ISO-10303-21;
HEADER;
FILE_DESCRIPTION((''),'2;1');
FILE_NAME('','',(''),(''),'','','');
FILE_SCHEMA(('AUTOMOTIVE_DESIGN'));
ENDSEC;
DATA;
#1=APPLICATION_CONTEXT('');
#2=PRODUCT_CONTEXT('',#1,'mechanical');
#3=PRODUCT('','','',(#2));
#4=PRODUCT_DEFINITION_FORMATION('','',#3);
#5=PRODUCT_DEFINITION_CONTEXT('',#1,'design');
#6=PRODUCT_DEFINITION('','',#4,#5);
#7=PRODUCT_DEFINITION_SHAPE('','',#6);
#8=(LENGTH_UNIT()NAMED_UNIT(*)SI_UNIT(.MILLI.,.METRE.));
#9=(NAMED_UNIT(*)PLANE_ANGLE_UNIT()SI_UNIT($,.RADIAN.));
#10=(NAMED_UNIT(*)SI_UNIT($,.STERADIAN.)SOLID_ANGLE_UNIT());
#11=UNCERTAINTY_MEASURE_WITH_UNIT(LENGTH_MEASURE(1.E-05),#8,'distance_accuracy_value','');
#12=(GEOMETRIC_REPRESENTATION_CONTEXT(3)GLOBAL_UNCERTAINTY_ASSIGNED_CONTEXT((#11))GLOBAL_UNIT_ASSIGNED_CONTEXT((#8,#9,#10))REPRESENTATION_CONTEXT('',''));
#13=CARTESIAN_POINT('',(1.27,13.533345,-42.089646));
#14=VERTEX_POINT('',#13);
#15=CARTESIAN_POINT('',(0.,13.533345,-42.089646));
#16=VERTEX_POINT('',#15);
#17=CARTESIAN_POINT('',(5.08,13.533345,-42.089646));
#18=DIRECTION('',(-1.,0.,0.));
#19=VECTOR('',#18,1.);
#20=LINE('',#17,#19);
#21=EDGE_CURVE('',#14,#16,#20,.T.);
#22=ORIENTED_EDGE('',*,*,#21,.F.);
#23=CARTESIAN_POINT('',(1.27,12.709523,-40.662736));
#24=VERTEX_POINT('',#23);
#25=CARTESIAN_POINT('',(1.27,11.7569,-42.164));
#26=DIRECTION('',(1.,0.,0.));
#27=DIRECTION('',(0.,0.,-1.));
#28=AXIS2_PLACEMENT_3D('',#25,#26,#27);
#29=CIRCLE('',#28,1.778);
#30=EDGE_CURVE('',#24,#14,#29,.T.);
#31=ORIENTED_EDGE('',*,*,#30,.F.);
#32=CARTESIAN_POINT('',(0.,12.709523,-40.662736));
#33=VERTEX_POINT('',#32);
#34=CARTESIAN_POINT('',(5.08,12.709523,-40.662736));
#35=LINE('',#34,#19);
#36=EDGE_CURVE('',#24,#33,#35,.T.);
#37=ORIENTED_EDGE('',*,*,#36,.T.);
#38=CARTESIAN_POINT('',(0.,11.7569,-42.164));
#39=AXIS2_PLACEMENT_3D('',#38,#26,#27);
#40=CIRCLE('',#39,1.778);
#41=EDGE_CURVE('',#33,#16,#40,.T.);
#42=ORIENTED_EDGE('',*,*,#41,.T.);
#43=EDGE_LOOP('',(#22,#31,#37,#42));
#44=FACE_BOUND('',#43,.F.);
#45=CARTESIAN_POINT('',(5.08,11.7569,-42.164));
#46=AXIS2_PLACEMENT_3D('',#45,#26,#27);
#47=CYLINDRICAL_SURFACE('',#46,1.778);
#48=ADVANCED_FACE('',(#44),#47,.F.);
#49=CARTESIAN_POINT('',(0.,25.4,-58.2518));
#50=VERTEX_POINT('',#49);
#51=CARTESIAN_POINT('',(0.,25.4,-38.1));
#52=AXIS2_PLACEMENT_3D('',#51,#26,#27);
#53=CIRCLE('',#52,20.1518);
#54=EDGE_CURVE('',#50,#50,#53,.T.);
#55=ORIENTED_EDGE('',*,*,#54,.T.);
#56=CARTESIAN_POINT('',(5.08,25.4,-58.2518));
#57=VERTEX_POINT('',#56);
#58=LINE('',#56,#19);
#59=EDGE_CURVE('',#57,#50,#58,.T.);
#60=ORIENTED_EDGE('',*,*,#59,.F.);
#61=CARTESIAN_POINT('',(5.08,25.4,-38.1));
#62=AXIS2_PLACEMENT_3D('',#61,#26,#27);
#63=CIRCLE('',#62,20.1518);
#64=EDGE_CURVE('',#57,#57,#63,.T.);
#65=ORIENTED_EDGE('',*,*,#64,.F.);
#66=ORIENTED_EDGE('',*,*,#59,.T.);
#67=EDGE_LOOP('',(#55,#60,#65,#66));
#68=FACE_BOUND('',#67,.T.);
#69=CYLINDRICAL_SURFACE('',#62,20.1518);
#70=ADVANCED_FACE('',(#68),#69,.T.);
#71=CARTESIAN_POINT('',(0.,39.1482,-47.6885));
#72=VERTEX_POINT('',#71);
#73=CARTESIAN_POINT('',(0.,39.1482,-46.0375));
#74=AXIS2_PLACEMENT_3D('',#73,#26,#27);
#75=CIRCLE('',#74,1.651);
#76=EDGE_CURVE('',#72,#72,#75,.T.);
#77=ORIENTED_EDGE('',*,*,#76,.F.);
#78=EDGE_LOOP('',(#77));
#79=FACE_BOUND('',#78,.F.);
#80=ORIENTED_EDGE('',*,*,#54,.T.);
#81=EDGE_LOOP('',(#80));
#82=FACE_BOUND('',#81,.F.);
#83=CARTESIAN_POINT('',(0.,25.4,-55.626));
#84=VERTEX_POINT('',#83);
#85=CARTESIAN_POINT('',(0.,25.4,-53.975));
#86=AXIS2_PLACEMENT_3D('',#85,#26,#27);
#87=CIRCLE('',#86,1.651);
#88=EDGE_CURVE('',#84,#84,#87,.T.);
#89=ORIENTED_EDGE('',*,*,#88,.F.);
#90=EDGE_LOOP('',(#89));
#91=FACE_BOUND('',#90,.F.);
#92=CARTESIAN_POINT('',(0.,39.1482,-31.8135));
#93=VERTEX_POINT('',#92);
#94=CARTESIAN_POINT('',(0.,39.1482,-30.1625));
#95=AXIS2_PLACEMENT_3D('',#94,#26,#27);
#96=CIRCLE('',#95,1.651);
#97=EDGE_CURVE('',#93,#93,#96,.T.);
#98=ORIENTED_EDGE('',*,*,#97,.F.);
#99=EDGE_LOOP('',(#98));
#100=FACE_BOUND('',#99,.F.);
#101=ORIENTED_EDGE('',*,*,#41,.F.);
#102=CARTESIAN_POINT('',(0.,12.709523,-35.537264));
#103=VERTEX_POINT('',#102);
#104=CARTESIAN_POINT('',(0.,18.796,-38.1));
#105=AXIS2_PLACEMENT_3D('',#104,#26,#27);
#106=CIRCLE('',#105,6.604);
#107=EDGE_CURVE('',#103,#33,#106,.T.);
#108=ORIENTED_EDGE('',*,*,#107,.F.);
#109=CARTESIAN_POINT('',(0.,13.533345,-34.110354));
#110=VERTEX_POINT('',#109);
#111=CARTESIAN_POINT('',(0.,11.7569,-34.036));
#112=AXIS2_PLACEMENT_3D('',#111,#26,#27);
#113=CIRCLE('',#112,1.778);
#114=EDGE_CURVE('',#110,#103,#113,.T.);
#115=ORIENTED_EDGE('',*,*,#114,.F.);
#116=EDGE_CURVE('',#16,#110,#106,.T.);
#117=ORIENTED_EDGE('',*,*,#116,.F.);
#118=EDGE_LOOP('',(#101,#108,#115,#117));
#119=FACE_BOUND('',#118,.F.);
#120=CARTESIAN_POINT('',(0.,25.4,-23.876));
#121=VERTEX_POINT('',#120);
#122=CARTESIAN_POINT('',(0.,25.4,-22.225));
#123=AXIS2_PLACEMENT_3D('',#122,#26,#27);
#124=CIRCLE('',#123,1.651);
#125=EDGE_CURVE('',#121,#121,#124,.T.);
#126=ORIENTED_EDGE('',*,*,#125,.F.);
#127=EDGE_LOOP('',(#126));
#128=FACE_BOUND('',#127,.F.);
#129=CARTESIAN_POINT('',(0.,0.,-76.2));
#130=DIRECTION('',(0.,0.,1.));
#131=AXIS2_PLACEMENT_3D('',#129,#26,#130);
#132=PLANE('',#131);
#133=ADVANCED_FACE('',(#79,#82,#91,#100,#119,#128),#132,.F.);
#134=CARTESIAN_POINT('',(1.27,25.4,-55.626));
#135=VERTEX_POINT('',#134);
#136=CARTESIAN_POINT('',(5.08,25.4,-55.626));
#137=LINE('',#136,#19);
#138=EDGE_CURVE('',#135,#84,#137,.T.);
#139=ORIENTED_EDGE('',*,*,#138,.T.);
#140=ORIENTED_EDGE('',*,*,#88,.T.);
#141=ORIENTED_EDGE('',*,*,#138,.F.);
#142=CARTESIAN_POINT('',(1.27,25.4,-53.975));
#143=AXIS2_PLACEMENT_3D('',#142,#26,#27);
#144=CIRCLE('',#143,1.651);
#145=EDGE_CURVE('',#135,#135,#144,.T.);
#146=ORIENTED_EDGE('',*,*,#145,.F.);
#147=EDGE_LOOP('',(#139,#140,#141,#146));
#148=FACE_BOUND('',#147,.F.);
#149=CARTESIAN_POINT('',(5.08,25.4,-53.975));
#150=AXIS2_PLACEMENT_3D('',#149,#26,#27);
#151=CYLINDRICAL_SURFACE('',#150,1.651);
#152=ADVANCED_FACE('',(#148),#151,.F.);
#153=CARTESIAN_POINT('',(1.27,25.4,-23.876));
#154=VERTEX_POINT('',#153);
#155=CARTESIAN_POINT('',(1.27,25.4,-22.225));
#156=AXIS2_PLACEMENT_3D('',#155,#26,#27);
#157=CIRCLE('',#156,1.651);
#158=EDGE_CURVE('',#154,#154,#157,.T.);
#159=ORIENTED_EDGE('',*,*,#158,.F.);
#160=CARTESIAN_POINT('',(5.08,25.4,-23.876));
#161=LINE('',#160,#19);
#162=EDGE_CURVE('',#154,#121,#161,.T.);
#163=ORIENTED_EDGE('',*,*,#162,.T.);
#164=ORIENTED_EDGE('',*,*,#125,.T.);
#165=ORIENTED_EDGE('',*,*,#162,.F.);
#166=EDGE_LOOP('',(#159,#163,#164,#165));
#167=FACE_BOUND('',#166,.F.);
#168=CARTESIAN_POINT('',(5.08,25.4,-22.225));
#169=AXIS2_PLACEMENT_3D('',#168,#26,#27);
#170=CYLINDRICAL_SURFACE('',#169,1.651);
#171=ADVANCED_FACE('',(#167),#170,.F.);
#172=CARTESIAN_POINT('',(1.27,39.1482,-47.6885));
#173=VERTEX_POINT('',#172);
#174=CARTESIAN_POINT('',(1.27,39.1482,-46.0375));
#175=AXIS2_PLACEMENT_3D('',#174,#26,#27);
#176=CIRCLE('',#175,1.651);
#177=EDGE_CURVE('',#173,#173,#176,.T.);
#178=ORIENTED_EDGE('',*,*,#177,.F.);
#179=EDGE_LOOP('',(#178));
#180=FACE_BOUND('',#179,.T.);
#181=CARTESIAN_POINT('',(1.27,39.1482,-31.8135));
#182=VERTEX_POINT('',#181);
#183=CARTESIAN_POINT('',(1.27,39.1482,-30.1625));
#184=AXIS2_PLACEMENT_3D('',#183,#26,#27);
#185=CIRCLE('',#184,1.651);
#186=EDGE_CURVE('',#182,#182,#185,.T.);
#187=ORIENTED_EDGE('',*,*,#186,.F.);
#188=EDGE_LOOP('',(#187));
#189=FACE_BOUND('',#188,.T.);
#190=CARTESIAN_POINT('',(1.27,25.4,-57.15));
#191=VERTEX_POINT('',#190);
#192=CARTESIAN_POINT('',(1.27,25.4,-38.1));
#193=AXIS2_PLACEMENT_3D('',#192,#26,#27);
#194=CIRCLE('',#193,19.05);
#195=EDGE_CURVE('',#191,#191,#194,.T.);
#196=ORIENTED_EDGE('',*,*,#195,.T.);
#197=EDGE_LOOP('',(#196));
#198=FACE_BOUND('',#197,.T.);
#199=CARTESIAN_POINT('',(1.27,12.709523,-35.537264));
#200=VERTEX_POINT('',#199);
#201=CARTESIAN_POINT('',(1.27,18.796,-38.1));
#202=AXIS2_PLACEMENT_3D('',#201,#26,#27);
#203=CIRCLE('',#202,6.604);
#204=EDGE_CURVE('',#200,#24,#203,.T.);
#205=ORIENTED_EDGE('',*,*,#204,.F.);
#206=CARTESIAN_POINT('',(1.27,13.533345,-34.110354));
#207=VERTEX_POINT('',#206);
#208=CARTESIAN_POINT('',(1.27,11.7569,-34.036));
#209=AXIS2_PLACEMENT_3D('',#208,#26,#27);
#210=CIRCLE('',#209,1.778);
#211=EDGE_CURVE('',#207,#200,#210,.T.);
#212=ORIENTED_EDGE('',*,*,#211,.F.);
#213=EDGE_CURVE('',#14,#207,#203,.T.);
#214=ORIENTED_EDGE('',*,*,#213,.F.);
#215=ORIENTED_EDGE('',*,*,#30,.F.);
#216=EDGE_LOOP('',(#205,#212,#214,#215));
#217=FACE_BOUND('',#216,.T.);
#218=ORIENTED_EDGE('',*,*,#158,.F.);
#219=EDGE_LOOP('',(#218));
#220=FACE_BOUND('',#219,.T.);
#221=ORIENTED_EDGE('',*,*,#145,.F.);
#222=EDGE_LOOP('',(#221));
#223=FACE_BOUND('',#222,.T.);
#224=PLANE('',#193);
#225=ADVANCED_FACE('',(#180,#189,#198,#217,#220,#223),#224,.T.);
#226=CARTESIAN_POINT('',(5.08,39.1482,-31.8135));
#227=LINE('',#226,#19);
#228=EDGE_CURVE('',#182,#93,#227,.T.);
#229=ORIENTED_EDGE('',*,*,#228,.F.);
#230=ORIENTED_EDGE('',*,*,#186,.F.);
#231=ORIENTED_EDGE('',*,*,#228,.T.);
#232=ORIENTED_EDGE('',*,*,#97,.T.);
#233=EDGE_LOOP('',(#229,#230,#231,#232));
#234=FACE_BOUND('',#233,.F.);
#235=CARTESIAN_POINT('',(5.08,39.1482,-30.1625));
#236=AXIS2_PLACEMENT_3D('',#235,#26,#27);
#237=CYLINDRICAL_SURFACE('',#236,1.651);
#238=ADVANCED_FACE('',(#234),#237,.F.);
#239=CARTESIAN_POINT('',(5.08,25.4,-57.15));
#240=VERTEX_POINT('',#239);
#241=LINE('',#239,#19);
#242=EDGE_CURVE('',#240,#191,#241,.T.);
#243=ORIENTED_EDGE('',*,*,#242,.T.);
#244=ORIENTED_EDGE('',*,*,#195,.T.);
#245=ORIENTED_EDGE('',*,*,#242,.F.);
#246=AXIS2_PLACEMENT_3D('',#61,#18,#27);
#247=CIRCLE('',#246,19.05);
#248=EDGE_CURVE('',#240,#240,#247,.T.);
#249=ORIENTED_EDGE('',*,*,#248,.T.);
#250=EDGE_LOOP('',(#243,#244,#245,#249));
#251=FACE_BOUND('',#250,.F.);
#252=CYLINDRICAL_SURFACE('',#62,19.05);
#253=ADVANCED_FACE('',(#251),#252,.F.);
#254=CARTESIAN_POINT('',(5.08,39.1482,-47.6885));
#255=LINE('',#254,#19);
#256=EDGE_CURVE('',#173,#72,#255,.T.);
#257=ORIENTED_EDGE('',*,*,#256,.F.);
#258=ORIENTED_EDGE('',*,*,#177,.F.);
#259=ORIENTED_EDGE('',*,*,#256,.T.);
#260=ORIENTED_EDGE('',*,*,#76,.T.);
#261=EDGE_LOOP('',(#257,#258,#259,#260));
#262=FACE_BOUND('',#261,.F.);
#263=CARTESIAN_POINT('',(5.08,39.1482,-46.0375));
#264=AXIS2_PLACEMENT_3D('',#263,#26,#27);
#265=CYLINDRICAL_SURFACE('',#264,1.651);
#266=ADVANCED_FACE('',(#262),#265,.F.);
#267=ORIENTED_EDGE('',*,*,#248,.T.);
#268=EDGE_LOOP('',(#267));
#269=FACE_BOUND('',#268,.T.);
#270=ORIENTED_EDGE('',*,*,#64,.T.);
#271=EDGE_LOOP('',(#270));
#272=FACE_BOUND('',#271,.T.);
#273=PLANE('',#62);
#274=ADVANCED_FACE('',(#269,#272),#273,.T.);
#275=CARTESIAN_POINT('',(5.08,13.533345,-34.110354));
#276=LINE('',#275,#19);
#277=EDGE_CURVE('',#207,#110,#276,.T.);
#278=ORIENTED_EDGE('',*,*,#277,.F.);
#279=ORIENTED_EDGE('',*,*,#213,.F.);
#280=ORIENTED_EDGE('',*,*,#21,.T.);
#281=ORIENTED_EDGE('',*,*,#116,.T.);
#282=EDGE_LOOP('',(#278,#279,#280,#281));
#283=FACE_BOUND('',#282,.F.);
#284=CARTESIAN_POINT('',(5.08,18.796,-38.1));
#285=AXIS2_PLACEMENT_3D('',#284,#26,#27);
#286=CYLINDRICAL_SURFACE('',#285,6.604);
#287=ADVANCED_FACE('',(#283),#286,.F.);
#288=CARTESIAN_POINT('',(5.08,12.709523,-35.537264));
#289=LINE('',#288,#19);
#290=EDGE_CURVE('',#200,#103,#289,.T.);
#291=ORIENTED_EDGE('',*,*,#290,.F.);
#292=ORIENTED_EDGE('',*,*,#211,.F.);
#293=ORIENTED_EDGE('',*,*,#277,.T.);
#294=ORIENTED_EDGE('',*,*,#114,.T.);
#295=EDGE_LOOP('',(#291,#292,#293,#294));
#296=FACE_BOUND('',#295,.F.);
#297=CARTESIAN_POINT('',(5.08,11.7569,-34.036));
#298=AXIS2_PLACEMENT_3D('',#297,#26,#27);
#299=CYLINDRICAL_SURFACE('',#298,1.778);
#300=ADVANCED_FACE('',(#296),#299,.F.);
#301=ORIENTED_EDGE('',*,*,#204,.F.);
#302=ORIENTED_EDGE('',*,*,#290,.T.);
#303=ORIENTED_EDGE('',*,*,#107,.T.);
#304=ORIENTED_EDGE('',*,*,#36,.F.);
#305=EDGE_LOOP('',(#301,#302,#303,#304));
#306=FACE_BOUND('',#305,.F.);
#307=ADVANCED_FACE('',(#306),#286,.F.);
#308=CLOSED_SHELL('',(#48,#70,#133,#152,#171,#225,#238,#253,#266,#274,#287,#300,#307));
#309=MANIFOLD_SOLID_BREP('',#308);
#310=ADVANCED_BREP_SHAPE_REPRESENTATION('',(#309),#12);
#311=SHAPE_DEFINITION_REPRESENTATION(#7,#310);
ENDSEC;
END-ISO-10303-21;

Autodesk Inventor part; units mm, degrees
ref_plane "YZ Plane" through (0, 0, 0) normal (1, 0, 0) x (0, 1, 0)
ref_plane "XZ Plane" through (0, 0, 0) normal (0, 1, 0) x (-1, 0, 0)
ref_plane "XY Plane" through (0, 0, 0) normal (0, 0, 1) x (1, 0, 0)
sketch "Sketch1" plane through (0, 0, 0) normal (0, 1, 0) x (-1, 0, 0)
  line L0 (0, 0) -> (-20.32, 0)
  line L1 (-20.32, 0) -> (-20.32, -76.2)
  line L2 (-20.32, -76.2) -> (0, -76.2)
  line L3 (0, -76.2) -> (0, 0)
  dimension "d0" = 20.32
  dimension "d1" = 76.2
extrude "Extrusion1" add sketch "Sketch1" along normal blind 7.62
sketch "Sketch2" plane through (0, 7.62, 0) normal (0, 1, 0) x (1, 0, 0)
  line L0 (0, 0) -> (0, 12.7)
  line L1 (0, 12.7) -> (20.32, 12.7)
  line L2 (20.32, 12.7) -> (20.32, 63.5)
  line L3 (20.32, 63.5) -> (0, 63.5)
  line L4 (0, 63.5) -> (0, 12.7)
  dimension "d4" = 12.7
  dimension "d5" = 20.32
  dimension "d6" = 50.8
extrude "Extrusion2" add sketch "Sketch2" along normal blind 43.18
sketch "Sketch3" plane through (20.32, 0, 0) normal (1, 0, 0) x (0, 0, -1)
  line L0 (12.7, 50.8) -> (63.5, 50.8) projected
  line L1 (38.1, 50.8) -> (38.1, 25.4)
  circle A0 centre (38.1, 25.4) radius 19.05
  point P0 (0, 0)
  dimension "d9" = 25.4
  dimension "d10" = 38.1
extrude "Extrusion3" cut sketch "Sketch3" against normal blind 15.24
fillet "Fillet1" radius 25.4 2 edges at (10.16, 50.8, -63.5) (10.16, 50.8, -12.7)
sketch "Sketch6" plane through (0, 7.62, 0) normal (0, 1, 0) x (1, 0, 0)
  line L0 (0, 0) -> (20.32, 0) projected
  line L1 (10.16, 0) -> (10.16, 6.35)
  line L2 (20.32, 76.2) -> (0, 76.2) projected
  line L3 (10.16, 76.2) -> (10.16, 69.85)
  dimension "d20" = 6.35
  dimension "d21" = 6.35
fillet "Fillet2" radius 25.4 2 edges at (10.16, 7.62, -63.5) (10.16, 7.62, -12.7)
hole "Hole1" at (10.16, 7.62, -6.35) at (10.16, 7.62, -69.85) direction (0, -1, 0) diameter 5.08 end through all counterbore diameter 10.16 counterbore depth 3.81
sketch "Sketch7" plane through (10.16, 7.62, -6.35) normal (0, -1, 0) x (1, 0, 0)
  circle A0 centre (0, 0) radius 5.08
  circle A1 centre (0, -63.5) radius 2.54 projected
  line L0 (-2.54, -63.5) -> (0, -63.5)
  circle A2 centre (0, -63.5) radius 5.08
  point P0 (-10.16, 6.35)
  dimension "d30" = 10.16
  dimension "d31" = 10.16
extrude "Extrusion5" cut sketch "Sketch7" against normal blind 15.24 contours A0 | A1 | A2
sketch "Sketch9" plane through (5.08, 25.4, -38.1) normal (1, 0, 0) x (0, 0, -1)
  line L0 (0, 0) -> (0, -6.604)
  circle A0 centre (0, -6.604) radius 6.604
  line L1 (0, -6.604) -> (-3.302, -12.3232)
  line L2 (0, -6.604) -> (6.604, -6.604) construction
  line L3 (0, -6.604) -> (3.302, -12.3232)
  line L4 (0, -6.604) -> (6.604, -6.604) construction
  line L5 (-3.302, -12.3232) -> (-4.064, -13.6431)
  line L6 (3.302, -12.3232) -> (4.064, -13.6431)
  line L7 (3.302, -12.3232) -> (4.826, -12.3232) construction
  circle A1 centre (-4.064, -13.6431) radius 1.778
  circle A2 centre (4.064, -13.6431) radius 1.778
  circle A3 centre (0, 0) radius 19.05 projected
  line L8 (-19.05, 0) -> (-17.526, 0)
  line L9 (-17.526, 0) -> (-15.875, 0)
  circle A4 centre (-15.875, 0) radius 1.651
  line L10 (19.05, 0) -> (17.526, 0)
  line L11 (17.526, 0) -> (15.875, 0)
  circle A5 centre (15.875, 0) radius 1.651
  line L12 (0, 0) -> (-9.525, 16.4978)
  line L13 (0, 0) -> (9.525, 16.4978)
  line L14 (-9.525, 16.4978) -> (-8.763, 15.178)
  line L15 (-8.763, 15.178) -> (-7.9375, 13.7482)
  line L16 (9.525, 16.4978) -> (8.763, 15.178)
  line L17 (8.763, 15.178) -> (7.9375, 13.7482)
  circle A6 centre (-7.9375, 13.7482) radius 1.651
  circle A7 centre (7.9375, 13.7482) radius 1.651
  point P0 (-38.1, -25.4)
  point P1 (-2.5627, -12.6905)
  point P2 (2.5627, -12.6905)
  point P3 (3.9897, -11.8666)
  point P4 (-3.9897, -11.8666)
  dimension "d47" = 6.604
  dimension "d48" = 120
  dimension "d49" = 60
  dimension "d50" = 1.524
  dimension "d51" = 1.524
  dimension "d52" = 60
  dimension "d53" = 3.556
  dimension "d54" = 3.556
  dimension "d55" = 1.524
  dimension "d56" = 1.651
  dimension "d57" = 1.524
  dimension "d58" = 1.651
  dimension "d59" = 1.524
  dimension "d60" = 1.651
  dimension "d61" = 1.524
  dimension "d62" = 1.651
extrude "Extrusion7" cut sketch "Sketch9" against normal blind 25.4 contours A0 A2 L3 L0 | L0 L1 A1 A0 | L3 A2 A0 A1 L1 | A1 L1 A0 | A0 A1 | A6 L12 | L12 A6 | A7 L13 | L13 A7 | A1 A0 L1 | A2 A0 L3 | L3 A0 A2 | A2 A0 | A4 | A5
sketch "Sketch10" plane through (5.08, 25.4, -38.1) normal (1, 0, 0) x (0, 0, -1)
  arc A0 (3.9897, -11.8666) -> (-3.9897, -11.8666) centre (0, -6.604) ccw projected
  circle A1 centre (0, 0) radius 20.1518
  circle A2 centre (0, 0) radius 57.3764
  point P0 (-38.1, -25.4)
extrude "Extrusion8" cut sketch "Sketch10" along normal mid plane 50.8
sketch "Sketch11" plane through (5.08, 25.4, -38.1) normal (1, 0, 0) x (0, 0, -1)
  arc A0 (3.9897, -11.8666) -> (-3.9897, -11.8666) centre (0, -6.604) ccw projected
  circle A1 centre (0, 0) radius 19.05
  point P0 (-38.1, -25.4)
extrude "Extrusion9" cut sketch "Sketch11" against normal blind 3.81
sketch "Sketch12" plane through (20.32, 25.4, -38.1) normal (1, 0, 0) x (0, 0, -1)
  arc A0 (3.9897, -11.8666) -> (-3.9897, -11.8666) centre (0, -6.604) ccw projected
  circle A1 centre (0, 0) radius 21.629
  point P0 (-38.1, -25.4)
extrude "Extrusion10" cut sketch "Sketch12" against normal blind 15.24
properties part number "Motor Mount V2"
